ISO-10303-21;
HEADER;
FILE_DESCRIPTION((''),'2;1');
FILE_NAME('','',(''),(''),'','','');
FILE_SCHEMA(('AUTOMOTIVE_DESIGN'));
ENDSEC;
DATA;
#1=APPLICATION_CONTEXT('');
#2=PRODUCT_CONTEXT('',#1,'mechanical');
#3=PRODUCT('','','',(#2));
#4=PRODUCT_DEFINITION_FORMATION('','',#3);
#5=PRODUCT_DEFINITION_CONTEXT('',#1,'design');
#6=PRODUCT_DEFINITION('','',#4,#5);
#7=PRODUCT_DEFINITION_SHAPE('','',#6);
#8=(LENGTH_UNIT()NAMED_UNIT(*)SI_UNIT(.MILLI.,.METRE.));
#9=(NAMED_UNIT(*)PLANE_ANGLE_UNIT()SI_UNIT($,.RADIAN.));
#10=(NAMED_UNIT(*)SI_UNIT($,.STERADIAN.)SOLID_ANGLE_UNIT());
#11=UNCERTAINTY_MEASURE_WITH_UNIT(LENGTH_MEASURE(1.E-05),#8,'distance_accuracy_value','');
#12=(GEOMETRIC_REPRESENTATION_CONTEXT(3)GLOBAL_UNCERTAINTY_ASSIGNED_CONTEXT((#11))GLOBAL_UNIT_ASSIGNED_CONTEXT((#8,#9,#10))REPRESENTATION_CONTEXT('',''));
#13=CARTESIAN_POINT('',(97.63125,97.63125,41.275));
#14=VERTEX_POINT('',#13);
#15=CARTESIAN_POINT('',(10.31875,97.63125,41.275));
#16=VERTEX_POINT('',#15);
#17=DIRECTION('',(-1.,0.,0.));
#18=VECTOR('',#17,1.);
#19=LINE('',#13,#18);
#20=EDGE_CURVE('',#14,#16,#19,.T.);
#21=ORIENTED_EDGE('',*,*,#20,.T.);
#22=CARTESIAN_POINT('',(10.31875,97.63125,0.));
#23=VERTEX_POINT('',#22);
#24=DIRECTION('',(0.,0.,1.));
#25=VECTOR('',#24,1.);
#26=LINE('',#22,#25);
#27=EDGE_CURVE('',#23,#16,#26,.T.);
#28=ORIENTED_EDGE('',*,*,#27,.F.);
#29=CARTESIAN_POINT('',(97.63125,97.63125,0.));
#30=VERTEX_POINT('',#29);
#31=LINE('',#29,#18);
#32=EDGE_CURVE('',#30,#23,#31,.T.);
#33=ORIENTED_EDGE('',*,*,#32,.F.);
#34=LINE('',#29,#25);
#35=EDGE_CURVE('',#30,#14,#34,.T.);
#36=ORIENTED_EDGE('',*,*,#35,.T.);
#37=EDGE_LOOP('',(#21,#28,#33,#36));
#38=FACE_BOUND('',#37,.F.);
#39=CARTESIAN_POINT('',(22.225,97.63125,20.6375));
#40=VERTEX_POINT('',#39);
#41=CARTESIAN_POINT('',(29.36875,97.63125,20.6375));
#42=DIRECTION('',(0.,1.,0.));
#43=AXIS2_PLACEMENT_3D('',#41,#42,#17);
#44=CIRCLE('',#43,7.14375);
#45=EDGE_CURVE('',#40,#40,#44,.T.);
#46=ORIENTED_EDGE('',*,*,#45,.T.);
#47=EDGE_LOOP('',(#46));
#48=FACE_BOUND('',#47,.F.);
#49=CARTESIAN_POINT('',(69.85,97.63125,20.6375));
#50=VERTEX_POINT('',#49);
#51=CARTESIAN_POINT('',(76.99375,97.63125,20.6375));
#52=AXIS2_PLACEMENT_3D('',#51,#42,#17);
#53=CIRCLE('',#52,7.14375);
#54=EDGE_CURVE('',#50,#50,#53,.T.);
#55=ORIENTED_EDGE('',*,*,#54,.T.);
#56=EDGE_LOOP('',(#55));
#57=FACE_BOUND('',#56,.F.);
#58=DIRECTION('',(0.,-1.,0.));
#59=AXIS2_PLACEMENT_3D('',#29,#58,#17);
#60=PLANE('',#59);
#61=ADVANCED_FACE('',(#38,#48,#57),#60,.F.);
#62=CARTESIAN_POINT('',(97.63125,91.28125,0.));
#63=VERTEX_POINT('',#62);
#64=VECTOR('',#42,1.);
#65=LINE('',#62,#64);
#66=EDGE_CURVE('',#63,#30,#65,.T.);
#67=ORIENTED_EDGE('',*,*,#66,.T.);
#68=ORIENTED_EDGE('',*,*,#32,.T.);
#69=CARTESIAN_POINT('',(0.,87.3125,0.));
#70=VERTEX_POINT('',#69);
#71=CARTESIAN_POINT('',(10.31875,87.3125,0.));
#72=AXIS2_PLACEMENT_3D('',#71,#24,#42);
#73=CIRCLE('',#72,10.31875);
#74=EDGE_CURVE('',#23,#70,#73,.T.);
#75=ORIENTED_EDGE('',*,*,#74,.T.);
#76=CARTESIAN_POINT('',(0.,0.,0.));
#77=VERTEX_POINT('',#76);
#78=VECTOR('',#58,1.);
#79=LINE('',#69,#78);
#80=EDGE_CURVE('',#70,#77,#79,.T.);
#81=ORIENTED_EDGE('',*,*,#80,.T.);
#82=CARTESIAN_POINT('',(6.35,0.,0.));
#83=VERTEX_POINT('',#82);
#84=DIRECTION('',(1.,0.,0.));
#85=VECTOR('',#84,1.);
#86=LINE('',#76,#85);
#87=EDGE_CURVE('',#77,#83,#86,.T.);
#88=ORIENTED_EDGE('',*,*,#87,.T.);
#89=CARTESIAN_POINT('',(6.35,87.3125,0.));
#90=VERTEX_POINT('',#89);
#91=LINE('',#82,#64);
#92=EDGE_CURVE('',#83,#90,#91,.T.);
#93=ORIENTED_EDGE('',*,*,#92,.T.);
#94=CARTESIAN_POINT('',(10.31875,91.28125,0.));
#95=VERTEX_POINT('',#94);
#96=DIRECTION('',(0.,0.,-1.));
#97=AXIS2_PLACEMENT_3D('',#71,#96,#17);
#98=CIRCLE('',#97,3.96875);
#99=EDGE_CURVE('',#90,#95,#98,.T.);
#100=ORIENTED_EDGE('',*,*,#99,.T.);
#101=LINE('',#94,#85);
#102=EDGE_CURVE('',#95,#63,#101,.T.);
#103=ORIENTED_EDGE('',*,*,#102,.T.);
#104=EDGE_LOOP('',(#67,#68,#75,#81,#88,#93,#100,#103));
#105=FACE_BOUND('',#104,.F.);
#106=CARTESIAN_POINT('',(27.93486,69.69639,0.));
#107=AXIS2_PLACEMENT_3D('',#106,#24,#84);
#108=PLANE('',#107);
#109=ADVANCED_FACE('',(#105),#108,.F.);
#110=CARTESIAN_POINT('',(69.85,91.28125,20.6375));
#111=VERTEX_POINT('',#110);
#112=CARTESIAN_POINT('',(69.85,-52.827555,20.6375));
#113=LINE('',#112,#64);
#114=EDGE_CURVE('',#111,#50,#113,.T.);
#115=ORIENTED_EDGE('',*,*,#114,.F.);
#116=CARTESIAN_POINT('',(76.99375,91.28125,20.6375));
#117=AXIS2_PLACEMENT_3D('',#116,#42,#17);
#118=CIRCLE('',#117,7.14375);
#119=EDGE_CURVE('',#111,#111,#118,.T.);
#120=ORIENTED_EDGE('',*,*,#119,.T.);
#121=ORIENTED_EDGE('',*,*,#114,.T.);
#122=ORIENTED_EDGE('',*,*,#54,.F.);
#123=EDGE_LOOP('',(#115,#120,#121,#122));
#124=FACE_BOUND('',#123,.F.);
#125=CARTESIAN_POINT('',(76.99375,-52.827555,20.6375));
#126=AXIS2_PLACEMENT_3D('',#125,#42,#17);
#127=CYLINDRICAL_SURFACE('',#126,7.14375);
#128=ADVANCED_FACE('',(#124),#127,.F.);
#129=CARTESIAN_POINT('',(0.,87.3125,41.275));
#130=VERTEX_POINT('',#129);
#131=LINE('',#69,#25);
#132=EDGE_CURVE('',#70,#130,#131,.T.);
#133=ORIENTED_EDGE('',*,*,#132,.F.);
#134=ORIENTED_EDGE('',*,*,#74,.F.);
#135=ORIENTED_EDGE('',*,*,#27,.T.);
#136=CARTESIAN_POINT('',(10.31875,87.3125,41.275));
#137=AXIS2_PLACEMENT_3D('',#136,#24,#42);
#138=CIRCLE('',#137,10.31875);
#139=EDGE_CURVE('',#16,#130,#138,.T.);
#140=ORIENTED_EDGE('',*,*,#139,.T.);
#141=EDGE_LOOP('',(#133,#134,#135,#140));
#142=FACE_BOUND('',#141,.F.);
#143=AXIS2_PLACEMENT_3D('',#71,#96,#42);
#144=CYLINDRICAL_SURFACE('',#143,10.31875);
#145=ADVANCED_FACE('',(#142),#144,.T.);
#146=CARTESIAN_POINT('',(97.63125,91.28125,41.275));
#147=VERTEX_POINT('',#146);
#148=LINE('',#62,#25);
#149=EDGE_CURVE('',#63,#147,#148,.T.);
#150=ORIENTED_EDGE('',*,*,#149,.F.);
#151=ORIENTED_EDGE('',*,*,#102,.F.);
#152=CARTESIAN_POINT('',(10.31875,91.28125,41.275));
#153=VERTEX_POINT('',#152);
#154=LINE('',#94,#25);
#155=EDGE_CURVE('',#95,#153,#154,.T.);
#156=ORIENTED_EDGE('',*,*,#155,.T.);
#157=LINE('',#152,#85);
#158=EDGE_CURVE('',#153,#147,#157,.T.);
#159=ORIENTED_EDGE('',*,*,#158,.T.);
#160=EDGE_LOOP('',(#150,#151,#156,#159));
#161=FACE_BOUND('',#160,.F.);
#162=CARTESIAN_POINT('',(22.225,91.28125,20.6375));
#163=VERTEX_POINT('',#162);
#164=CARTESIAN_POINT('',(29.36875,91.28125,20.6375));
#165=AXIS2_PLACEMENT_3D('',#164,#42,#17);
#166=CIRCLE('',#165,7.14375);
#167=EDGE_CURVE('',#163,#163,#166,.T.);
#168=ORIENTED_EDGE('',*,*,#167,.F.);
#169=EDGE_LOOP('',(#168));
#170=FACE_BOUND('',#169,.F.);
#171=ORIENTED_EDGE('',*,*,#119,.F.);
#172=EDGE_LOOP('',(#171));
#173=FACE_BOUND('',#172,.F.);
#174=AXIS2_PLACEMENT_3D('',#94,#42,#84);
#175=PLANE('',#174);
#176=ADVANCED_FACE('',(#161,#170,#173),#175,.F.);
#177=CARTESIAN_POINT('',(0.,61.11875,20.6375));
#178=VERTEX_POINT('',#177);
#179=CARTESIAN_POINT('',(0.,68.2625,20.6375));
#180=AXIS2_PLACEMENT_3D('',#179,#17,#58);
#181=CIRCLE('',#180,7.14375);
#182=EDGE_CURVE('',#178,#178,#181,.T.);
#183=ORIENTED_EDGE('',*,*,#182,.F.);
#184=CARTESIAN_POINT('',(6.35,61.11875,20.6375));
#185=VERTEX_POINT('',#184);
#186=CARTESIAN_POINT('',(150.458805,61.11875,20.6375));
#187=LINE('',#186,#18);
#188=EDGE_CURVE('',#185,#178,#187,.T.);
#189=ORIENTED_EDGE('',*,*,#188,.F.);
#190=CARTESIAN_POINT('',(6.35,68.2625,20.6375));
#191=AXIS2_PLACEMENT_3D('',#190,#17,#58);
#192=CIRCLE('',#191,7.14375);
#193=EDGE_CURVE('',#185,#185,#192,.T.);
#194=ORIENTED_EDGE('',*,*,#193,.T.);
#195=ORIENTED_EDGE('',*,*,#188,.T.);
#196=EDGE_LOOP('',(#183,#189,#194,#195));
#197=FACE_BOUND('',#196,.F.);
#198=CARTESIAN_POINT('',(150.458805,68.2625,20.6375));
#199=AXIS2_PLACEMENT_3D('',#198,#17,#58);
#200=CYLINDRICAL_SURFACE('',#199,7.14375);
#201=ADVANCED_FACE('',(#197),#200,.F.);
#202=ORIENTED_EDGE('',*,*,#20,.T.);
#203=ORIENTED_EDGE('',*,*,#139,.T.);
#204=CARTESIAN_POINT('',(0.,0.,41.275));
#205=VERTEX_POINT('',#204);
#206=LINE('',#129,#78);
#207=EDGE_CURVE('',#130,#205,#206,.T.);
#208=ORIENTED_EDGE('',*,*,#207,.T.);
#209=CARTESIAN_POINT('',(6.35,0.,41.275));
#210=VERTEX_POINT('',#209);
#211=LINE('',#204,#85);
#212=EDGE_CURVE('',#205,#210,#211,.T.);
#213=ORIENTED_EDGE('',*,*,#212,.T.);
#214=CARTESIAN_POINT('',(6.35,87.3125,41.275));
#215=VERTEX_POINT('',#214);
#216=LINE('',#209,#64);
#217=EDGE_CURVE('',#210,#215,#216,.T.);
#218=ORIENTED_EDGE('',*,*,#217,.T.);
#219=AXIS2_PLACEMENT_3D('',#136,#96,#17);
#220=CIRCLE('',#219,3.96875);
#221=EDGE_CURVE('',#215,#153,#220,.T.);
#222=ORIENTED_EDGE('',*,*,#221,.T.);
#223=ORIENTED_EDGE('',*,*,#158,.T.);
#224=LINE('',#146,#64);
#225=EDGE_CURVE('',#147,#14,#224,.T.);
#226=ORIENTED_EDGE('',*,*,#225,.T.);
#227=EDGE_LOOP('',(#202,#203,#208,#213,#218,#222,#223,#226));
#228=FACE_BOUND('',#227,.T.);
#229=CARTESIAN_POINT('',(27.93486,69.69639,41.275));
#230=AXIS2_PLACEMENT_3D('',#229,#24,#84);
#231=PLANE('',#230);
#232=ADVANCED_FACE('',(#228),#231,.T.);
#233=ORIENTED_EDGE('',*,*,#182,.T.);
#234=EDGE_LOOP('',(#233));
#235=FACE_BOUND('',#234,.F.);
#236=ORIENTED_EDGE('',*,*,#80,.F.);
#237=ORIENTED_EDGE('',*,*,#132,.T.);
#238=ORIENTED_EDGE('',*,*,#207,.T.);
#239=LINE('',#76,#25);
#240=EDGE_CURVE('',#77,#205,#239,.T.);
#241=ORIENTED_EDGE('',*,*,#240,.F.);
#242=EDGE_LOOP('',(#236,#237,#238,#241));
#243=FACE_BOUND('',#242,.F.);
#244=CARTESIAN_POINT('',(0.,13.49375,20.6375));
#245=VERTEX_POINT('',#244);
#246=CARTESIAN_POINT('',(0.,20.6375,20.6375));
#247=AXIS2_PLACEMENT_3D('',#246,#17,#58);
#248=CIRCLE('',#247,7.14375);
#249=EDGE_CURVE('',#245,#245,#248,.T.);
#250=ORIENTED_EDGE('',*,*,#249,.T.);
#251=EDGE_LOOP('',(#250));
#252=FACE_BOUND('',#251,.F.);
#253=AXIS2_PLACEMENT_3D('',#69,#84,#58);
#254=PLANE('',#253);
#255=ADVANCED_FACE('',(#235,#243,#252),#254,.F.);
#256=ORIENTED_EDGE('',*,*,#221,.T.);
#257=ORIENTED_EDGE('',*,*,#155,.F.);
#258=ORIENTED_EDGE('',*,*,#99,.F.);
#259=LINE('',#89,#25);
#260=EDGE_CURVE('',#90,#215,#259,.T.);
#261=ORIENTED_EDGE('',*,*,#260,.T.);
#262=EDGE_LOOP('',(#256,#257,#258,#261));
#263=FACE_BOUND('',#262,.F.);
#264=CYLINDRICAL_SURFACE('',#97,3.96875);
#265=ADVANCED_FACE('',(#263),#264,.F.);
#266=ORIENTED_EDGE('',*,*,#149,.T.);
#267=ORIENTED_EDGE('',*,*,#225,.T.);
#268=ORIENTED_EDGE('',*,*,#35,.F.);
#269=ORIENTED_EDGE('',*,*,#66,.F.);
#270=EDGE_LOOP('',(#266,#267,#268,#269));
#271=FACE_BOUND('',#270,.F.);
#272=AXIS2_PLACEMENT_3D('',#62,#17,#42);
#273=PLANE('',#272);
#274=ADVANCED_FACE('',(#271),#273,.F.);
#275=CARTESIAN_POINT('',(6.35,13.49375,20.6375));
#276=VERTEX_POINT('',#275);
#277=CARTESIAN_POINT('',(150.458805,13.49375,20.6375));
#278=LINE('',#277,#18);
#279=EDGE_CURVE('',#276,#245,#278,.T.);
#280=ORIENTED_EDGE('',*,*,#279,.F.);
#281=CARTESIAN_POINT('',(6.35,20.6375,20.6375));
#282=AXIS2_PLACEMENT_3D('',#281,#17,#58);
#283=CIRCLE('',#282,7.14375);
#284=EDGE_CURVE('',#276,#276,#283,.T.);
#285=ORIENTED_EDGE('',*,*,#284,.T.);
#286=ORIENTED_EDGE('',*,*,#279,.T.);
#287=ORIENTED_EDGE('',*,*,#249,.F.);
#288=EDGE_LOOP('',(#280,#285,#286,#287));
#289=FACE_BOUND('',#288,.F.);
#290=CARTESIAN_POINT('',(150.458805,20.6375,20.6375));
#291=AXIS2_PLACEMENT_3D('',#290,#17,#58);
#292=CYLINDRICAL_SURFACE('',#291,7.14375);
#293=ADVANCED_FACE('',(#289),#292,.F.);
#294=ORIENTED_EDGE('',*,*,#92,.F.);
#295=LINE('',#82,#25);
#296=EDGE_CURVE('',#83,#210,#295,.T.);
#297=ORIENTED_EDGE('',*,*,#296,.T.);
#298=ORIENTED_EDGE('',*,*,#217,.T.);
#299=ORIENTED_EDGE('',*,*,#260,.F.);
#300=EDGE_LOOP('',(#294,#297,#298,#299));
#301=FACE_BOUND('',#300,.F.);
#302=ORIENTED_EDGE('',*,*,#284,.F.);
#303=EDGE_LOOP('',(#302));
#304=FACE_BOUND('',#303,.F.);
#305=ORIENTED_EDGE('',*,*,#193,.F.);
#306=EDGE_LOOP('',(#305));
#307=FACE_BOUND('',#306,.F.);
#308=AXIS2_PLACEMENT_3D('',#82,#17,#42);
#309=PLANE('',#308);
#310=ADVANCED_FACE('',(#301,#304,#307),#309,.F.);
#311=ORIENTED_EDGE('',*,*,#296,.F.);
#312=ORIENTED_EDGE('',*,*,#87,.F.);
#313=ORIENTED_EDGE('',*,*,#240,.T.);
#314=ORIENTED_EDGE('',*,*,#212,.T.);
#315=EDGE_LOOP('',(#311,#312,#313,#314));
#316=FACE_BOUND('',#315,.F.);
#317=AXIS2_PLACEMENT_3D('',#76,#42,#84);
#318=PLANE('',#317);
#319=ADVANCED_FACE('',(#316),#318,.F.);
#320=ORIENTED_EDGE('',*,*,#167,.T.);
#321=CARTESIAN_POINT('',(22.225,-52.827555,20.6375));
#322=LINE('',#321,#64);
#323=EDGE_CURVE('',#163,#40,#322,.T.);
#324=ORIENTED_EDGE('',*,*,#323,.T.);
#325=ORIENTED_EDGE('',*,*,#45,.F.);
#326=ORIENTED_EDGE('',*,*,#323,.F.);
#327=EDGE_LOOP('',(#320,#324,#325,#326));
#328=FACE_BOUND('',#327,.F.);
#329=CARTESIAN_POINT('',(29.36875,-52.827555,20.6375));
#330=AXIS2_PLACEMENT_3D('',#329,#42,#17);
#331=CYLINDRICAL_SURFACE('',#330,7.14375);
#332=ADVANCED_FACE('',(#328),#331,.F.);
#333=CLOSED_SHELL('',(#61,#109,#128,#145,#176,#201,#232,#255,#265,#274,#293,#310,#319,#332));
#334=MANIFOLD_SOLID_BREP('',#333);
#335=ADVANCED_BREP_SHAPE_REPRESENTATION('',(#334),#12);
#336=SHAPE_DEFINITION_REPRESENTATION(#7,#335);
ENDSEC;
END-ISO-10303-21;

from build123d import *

# Parameters (mm, degrees)
F1_DEPTH = 41.275
F4_D     = 14.2875
F7_D     = 14.2875


# Not quite as in the source:
# - a length typed as a fraction of an inch, garbled in the dataset ("3 / 203.2 mm" for 3/8 in), is restored


with BuildPart() as f1:
    # F0 (on Top) → F1 (new body)
    with BuildSketch(Plane.XY):
        with BuildLine():
            ThreePointArc((10.31875, 97.63125), (3.0222919016, 94.6089580984), (0, 87.3125))
            Line((0, 87.3125), (0, 0))
            Line((0, 0), (6.35, 0))
            Line((6.35, 0), (6.35, 87.3125))
            ThreePointArc((6.35, 87.3125), (7.5124199622, 90.1188300378), (10.31875, 91.28125))
            Line((10.31875, 91.28125), (97.63125, 91.28125))
            Line((97.63125, 91.28125), (97.63125, 97.63125))
            Line((97.63125, 97.63125), (10.31875, 97.63125))
        make_face()
    extrude(amount=F1_DEPTH)

    # F4 (through all)
    with Locations(Plane.YZ.offset(6.35)):
        with Locations((20.6375, 20.6375), (68.2625, 20.6375)):
            Hole(F4_D / 2)

    # F7 (through all)
    with Locations(Plane.XZ.offset(-91.28125)):
        with Locations((29.36875, 20.6375), (76.99375, 20.6375)):
            Hole(F7_D / 2)


solid = f1.part
